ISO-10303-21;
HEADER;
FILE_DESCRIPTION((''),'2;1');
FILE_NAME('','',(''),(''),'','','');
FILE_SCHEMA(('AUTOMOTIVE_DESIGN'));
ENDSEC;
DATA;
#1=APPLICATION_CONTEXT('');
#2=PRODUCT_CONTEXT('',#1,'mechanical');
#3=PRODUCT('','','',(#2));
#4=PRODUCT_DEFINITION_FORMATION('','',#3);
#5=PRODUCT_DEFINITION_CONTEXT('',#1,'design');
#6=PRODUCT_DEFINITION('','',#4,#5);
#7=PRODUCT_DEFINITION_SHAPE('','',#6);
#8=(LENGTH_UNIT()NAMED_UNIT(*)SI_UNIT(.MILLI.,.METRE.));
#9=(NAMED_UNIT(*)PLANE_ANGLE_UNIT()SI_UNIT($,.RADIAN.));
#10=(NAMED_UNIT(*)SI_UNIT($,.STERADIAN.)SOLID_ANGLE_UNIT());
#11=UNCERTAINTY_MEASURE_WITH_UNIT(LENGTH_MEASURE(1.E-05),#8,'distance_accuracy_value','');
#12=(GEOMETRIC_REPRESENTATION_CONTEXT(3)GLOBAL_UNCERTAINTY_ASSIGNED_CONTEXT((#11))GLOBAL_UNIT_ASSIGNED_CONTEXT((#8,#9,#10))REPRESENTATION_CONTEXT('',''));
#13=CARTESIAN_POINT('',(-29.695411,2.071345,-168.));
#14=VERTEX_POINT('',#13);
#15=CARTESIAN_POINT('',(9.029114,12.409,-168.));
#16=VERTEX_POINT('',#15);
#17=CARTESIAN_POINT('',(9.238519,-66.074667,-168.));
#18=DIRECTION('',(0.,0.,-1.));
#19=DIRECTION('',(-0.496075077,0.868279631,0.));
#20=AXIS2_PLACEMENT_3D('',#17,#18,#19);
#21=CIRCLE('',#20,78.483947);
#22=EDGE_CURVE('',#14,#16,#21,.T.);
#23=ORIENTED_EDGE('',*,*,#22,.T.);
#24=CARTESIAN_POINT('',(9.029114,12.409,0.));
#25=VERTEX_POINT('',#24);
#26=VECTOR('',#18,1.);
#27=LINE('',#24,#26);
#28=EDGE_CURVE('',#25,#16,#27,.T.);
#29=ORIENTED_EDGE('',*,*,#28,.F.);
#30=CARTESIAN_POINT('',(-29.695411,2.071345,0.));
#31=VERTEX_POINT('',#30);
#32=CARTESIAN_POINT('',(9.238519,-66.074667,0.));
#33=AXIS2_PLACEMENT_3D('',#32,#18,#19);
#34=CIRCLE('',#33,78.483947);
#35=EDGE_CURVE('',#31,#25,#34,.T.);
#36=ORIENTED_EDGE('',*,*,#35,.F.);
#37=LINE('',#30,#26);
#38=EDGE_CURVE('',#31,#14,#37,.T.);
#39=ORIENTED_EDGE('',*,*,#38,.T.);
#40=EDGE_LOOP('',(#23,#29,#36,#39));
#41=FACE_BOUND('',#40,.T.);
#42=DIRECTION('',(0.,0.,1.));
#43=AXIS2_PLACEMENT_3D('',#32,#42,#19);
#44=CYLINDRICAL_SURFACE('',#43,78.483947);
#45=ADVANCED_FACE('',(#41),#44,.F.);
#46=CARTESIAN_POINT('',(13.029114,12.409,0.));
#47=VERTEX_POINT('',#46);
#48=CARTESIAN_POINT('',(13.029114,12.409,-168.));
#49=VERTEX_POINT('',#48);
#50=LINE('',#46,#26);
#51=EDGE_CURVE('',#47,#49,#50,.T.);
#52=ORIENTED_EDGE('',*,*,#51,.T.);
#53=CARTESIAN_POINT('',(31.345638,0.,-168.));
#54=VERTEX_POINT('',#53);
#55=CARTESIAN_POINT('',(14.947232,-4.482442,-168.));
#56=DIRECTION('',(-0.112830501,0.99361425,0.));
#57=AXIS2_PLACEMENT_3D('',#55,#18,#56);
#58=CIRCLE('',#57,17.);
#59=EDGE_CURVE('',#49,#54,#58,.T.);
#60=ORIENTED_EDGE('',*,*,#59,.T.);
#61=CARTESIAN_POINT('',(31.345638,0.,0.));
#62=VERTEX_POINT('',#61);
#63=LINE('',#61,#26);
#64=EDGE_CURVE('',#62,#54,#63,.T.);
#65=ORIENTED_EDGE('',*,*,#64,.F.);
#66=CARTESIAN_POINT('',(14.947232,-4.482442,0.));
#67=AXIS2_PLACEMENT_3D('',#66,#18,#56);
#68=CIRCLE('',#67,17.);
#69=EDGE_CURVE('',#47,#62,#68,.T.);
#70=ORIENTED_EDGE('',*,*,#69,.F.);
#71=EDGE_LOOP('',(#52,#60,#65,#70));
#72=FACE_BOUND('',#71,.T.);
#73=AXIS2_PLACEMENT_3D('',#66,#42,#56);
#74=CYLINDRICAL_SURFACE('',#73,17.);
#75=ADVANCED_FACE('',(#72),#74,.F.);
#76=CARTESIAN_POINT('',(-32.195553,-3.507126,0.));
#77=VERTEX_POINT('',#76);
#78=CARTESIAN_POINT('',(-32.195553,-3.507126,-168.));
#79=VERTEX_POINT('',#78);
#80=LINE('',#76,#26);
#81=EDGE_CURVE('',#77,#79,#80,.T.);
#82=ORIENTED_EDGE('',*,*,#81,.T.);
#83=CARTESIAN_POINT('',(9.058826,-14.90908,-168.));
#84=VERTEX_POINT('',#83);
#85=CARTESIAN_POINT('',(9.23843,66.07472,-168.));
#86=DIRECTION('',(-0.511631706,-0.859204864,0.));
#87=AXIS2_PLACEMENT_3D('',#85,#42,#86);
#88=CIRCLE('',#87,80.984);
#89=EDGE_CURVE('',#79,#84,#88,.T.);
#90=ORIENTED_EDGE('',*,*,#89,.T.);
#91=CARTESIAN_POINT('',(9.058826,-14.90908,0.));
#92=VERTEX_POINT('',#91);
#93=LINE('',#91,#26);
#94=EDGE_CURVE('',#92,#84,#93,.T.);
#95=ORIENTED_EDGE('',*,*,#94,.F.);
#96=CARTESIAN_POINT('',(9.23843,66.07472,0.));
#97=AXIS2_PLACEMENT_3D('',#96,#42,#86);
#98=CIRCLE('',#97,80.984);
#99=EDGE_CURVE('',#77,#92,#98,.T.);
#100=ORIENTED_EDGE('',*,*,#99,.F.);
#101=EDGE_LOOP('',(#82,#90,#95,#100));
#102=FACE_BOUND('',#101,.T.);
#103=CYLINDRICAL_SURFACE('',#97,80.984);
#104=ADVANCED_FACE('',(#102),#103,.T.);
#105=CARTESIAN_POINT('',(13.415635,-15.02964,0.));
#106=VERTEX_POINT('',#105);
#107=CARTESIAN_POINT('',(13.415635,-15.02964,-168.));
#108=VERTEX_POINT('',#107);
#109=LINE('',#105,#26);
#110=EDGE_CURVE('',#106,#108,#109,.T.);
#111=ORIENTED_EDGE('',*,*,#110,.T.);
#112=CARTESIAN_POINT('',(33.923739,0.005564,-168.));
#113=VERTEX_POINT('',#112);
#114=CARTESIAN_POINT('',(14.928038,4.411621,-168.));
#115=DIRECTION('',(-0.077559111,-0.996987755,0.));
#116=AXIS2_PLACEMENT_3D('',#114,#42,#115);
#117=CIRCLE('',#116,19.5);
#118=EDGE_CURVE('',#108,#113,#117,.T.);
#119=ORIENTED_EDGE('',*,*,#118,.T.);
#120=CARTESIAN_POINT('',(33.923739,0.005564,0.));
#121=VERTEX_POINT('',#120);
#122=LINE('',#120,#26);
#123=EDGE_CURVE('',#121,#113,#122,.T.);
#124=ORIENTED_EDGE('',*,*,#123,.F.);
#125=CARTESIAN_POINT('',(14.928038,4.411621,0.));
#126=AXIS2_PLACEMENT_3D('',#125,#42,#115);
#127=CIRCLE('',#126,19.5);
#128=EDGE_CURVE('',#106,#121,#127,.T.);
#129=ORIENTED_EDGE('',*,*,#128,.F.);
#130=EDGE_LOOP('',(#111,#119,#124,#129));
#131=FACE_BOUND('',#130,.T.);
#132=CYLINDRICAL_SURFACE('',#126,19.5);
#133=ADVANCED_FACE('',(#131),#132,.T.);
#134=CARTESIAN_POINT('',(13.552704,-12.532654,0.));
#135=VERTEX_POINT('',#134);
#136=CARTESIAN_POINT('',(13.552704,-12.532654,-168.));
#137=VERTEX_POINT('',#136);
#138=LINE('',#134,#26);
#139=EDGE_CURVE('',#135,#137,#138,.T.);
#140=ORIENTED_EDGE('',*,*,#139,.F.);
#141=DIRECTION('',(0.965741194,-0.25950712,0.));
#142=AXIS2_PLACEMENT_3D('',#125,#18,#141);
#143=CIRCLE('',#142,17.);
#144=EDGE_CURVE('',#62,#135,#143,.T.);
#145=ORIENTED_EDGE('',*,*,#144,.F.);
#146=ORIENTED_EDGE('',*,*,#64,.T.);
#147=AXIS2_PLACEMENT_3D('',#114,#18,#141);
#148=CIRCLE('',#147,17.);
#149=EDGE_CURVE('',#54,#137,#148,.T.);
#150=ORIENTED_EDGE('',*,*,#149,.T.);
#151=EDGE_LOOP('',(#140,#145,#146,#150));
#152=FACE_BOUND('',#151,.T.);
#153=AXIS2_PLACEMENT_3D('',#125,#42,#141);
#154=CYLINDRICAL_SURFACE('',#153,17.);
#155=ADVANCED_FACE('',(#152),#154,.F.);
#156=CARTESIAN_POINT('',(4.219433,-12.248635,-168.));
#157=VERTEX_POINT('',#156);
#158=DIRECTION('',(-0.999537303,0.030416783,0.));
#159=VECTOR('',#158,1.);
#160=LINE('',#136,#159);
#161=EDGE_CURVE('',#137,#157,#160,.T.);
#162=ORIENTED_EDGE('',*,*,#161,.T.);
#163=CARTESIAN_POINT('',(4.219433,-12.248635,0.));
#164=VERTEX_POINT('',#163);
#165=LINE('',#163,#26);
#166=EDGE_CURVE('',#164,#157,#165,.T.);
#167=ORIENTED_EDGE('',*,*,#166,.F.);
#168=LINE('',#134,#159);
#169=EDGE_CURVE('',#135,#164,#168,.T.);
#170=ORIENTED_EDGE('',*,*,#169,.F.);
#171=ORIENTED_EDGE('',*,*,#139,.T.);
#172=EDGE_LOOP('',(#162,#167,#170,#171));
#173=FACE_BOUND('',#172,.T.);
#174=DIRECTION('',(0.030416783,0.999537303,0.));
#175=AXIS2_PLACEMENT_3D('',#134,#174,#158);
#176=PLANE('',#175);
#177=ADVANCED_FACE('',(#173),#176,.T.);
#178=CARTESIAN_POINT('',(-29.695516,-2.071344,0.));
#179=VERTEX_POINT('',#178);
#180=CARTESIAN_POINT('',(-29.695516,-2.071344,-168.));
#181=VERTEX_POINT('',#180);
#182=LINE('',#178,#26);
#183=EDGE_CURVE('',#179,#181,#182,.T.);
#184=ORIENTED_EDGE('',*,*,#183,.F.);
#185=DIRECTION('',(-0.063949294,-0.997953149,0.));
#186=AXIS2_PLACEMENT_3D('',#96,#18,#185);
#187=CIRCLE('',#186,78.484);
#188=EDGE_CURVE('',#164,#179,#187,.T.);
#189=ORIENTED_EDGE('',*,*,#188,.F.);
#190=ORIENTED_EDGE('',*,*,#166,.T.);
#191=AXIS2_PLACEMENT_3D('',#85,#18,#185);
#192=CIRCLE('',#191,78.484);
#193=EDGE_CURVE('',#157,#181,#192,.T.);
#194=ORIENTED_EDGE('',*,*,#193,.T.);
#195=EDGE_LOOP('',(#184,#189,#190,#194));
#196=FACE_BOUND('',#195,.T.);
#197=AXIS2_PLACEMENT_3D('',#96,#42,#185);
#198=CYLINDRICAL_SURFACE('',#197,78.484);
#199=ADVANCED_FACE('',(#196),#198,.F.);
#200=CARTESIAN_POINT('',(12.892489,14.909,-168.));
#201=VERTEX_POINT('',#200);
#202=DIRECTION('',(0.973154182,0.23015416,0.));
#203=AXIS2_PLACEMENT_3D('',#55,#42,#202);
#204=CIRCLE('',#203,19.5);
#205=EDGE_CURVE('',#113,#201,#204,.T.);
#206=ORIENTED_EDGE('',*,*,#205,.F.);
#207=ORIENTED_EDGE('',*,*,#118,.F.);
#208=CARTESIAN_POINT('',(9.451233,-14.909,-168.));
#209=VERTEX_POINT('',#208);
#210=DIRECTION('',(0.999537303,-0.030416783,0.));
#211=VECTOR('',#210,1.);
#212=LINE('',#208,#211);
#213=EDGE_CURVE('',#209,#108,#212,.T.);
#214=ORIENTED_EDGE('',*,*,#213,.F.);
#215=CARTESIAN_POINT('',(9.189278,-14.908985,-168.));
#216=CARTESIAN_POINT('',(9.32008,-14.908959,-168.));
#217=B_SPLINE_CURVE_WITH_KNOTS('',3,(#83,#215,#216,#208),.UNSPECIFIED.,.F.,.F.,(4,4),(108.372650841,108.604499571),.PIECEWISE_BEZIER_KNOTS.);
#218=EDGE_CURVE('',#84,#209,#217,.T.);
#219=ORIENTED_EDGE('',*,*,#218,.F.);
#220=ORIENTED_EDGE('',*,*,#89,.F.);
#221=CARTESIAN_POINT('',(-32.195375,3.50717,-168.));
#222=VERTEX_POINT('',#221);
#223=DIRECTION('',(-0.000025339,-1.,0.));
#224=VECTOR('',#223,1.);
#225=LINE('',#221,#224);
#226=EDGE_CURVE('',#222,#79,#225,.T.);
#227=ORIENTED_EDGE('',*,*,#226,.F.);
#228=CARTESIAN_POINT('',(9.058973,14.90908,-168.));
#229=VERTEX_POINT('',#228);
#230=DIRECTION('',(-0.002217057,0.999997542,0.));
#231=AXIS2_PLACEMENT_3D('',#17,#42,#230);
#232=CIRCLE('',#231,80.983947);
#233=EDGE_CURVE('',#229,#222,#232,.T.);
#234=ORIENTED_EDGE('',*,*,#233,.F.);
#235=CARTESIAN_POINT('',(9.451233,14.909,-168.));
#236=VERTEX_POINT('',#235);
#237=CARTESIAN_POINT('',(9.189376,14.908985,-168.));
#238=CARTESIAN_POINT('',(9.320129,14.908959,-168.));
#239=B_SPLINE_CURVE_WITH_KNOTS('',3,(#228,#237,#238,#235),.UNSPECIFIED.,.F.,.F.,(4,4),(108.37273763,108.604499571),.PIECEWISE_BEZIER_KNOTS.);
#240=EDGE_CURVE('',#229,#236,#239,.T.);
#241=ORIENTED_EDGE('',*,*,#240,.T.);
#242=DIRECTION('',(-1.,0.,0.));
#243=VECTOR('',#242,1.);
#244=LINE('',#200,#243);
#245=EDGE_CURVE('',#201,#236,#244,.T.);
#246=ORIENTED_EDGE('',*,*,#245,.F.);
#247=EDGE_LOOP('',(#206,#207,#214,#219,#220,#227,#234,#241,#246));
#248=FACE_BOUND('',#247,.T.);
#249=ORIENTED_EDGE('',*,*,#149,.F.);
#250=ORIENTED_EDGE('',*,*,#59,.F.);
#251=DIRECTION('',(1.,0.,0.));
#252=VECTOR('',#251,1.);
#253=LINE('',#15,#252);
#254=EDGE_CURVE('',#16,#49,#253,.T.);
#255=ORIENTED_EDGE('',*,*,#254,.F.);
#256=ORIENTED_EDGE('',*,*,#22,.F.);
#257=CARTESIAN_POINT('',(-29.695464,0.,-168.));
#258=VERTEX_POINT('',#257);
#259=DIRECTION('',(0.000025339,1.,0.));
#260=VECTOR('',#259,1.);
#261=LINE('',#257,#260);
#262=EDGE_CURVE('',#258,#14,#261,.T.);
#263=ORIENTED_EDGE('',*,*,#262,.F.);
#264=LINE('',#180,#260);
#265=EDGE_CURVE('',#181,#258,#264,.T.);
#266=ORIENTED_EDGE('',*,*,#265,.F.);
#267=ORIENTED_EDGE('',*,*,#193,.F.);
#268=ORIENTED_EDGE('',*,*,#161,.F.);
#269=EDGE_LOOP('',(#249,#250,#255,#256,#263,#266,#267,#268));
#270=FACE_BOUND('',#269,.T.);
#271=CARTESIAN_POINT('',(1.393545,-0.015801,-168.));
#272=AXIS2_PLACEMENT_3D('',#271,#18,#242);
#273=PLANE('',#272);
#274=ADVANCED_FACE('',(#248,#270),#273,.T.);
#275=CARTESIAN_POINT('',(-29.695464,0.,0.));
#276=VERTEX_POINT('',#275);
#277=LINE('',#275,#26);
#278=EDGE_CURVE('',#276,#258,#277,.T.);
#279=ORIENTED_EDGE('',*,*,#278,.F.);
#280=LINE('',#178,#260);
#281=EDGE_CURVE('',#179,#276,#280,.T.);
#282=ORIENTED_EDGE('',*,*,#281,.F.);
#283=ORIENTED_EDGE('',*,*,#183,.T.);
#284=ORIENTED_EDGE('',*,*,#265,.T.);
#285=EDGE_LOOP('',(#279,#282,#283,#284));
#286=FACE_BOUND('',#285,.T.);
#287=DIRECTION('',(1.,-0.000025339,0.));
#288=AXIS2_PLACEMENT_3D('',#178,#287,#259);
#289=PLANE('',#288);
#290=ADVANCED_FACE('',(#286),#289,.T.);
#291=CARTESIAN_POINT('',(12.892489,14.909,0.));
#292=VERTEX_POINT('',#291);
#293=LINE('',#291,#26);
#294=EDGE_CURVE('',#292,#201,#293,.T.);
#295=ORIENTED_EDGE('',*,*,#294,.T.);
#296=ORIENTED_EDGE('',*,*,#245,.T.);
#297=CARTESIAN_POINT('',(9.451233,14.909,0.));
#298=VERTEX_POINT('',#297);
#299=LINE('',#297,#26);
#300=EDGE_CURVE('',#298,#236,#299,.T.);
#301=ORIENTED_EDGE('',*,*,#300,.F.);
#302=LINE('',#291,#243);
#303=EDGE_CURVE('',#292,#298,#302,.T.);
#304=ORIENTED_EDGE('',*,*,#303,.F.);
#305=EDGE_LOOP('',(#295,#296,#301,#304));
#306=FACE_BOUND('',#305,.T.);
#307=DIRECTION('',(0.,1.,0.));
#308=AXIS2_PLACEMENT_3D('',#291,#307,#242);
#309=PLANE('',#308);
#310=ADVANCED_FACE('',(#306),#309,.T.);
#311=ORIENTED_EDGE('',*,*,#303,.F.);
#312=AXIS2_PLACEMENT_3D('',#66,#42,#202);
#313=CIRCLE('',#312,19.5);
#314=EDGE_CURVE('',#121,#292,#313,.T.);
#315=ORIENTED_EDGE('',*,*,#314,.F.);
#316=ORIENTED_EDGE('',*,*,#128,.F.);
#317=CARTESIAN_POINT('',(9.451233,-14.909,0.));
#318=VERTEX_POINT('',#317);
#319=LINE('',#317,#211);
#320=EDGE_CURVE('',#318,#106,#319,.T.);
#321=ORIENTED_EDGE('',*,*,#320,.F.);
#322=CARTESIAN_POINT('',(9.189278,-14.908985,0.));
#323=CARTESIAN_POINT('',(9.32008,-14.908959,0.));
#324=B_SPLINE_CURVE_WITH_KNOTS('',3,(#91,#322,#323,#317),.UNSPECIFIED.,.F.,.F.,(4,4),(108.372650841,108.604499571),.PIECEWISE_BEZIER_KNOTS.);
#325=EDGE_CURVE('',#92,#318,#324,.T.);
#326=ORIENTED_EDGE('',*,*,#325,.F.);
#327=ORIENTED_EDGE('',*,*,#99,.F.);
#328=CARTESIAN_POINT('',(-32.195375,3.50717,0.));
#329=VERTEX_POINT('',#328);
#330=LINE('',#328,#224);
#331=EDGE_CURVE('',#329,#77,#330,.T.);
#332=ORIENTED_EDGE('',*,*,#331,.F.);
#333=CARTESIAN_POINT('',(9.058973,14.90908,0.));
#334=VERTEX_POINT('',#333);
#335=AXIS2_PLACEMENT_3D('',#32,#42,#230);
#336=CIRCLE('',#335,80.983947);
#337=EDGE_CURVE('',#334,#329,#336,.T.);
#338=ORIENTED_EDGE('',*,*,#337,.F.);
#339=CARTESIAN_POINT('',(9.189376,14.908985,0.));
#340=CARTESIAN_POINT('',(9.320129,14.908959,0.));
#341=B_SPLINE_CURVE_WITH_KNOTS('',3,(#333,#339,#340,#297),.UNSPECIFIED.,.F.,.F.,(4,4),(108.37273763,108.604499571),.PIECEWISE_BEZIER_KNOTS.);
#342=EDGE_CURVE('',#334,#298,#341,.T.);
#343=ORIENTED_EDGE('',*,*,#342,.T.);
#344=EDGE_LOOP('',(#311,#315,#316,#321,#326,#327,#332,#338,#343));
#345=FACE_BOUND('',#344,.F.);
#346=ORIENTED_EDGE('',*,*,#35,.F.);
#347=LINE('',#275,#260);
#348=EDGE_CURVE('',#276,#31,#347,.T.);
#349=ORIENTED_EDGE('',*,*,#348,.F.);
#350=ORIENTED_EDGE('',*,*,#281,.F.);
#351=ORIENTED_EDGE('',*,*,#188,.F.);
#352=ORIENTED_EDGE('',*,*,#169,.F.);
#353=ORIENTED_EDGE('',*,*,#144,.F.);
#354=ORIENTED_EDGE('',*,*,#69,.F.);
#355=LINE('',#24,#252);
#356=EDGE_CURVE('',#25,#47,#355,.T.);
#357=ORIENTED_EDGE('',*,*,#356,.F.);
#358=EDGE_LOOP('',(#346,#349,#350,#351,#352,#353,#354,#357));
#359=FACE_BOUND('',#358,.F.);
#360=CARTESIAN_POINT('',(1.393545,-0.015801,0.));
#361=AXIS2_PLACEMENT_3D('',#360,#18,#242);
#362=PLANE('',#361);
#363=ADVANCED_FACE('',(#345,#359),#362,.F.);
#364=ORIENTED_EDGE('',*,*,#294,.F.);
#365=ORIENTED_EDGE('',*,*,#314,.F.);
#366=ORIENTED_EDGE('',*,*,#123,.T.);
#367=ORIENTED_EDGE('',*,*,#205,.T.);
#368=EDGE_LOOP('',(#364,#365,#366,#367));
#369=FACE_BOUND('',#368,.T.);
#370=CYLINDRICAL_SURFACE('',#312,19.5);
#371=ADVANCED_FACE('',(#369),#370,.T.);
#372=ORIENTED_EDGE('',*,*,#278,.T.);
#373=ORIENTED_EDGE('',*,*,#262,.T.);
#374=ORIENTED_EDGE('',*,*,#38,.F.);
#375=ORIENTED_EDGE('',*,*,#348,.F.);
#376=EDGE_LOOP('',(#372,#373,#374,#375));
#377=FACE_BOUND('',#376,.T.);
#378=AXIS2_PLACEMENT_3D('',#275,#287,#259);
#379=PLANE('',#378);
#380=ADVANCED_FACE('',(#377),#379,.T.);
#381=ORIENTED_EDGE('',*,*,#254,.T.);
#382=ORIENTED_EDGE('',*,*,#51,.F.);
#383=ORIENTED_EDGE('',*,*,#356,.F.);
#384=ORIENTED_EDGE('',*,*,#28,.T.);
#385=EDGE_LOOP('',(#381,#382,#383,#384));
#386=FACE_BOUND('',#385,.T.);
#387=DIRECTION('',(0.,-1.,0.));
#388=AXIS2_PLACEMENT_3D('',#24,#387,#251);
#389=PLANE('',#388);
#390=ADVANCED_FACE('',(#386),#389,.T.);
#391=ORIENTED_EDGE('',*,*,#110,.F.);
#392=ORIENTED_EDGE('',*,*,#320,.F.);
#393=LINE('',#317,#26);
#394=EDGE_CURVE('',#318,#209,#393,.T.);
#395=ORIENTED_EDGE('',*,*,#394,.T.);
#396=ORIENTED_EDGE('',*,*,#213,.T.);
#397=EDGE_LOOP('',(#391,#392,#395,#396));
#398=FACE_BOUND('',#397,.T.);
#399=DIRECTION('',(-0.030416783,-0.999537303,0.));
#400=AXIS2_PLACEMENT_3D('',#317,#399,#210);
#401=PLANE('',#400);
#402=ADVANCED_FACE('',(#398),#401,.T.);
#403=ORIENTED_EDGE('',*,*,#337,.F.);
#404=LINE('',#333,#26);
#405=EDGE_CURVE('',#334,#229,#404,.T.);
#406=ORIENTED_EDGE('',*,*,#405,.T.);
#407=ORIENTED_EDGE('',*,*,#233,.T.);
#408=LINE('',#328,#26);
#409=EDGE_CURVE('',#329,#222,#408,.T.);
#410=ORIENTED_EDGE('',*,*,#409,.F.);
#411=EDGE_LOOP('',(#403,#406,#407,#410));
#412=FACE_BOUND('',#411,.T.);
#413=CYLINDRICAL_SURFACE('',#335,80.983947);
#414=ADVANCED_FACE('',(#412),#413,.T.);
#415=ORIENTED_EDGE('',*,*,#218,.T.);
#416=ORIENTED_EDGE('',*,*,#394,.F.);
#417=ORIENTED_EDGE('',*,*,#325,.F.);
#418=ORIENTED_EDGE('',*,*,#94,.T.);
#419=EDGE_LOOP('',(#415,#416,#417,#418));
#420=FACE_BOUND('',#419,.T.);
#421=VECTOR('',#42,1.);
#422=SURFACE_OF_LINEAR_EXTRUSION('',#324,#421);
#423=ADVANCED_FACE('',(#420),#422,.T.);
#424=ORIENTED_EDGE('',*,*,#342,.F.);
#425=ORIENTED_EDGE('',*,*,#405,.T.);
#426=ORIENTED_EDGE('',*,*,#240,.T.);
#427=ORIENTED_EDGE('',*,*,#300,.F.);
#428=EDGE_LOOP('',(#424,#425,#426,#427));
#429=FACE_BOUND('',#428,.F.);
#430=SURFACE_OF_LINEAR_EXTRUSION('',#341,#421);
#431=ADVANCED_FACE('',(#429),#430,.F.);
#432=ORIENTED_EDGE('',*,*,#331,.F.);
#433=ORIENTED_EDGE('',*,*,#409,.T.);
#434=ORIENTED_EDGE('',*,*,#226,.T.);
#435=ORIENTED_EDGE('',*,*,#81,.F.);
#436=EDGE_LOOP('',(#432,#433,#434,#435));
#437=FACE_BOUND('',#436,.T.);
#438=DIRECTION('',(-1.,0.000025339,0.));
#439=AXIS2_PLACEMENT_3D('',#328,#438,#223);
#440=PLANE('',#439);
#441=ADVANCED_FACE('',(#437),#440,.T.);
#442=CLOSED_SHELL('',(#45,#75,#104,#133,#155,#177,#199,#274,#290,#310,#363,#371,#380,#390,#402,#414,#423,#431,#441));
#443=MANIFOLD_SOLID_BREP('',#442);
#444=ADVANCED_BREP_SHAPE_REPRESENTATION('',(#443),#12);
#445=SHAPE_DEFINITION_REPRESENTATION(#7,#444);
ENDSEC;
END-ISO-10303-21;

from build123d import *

# Parameters (mm, degrees)
F1_DEPTH = 168


# Not quite as in the source:
# - a feature names something its author has since deleted; it is built from what else it names


with BuildPart() as f1:
    # F0 (on Top) → F1 (new body)
    with BuildSketch(Plane.XY):
        with BuildLine():
            add(Edge.make_bspline(
                [(9.0589725163, 14.9090803276), (9.1893761129, 14.9089854783), (9.3201289556, 14.9089586218), (9.4512325362, 14.909)],
                knots=[108.3727376298, 108.3727376298, 108.3727376298, 108.3727376298, 108.6044995707, 108.6044995707, 108.6044995707, 108.6044995707], degree=3))
            ThreePointArc((9.0589725163, 14.9090803276), (-12.3350874174, 11.9828700727), (-32.1953748348, 3.5071700662))
            Line((-32.1953748348, 3.5071700662), (-32.1954637008, 6.33471e-05))
            Line((-32.1954637008, 6.33471e-05), (-32.1955525689, -3.5071262621))
            ThreePointArc((-32.1955525689, -3.5071262621), (-12.3352527385, -11.9828512354), (9.0588260182, -14.9090804342))
            add(Edge.make_bspline(
                [(9.0588260182, -14.9090804342), (9.1892781859, -14.9089854984), (9.3200798608, -14.9089586063), (9.4512325362, -14.909)],
                knots=[108.372650841, 108.372650841, 108.372650841, 108.372650841, 108.6044995707, 108.6044995707, 108.6044995707, 108.6044995707], degree=3))
            Line((9.4512325362, -14.909), (13.4156349212, -15.0296401869))
            ThreePointArc((13.4156349212, -15.0296401869), (26.4575983511, -11.3147653424), (33.9237386916, 0.0055638769))
            ThreePointArc((33.9237386916, 0.0055638769), (26.221744338, 11.4277863656), (12.8924894738, 14.909))
            Line((12.8924894738, 14.909), (9.4512325362, 14.909))
        make_face()
        with BuildLine():
            Line((-29.6955161871, -2.0713442572), (-29.6954637016, 0))
            Line((-29.6954637016, 0), (-29.6954112161, 2.0713449993))
            ThreePointArc((-29.6954112161, 2.0713449993), (-11.0041823718, 9.7538427825), (9.0291136139, 12.409))
            Line((9.0291136139, 12.409), (13.0291136139, 12.409))
            ThreePointArc((13.0291136139, 12.409), (24.4821941123, 9.5918072896), (31.3456378974, 0))
            ThreePointArc((31.3456378974, 0), (24.7175372439, -9.4867852182), (13.5527042793, -12.5326540468))
            Line((13.5527042793, -12.5326540468), (4.2194331318, -12.2486345488))
            ThreePointArc((4.2194331318, -12.2486345488), (-13.3194868099, -9.0976060688), (-29.6955161871, -2.0713442572))
        make_face(mode=Mode.SUBTRACT)
    extrude(amount=-F1_DEPTH)


solid = f1.part
